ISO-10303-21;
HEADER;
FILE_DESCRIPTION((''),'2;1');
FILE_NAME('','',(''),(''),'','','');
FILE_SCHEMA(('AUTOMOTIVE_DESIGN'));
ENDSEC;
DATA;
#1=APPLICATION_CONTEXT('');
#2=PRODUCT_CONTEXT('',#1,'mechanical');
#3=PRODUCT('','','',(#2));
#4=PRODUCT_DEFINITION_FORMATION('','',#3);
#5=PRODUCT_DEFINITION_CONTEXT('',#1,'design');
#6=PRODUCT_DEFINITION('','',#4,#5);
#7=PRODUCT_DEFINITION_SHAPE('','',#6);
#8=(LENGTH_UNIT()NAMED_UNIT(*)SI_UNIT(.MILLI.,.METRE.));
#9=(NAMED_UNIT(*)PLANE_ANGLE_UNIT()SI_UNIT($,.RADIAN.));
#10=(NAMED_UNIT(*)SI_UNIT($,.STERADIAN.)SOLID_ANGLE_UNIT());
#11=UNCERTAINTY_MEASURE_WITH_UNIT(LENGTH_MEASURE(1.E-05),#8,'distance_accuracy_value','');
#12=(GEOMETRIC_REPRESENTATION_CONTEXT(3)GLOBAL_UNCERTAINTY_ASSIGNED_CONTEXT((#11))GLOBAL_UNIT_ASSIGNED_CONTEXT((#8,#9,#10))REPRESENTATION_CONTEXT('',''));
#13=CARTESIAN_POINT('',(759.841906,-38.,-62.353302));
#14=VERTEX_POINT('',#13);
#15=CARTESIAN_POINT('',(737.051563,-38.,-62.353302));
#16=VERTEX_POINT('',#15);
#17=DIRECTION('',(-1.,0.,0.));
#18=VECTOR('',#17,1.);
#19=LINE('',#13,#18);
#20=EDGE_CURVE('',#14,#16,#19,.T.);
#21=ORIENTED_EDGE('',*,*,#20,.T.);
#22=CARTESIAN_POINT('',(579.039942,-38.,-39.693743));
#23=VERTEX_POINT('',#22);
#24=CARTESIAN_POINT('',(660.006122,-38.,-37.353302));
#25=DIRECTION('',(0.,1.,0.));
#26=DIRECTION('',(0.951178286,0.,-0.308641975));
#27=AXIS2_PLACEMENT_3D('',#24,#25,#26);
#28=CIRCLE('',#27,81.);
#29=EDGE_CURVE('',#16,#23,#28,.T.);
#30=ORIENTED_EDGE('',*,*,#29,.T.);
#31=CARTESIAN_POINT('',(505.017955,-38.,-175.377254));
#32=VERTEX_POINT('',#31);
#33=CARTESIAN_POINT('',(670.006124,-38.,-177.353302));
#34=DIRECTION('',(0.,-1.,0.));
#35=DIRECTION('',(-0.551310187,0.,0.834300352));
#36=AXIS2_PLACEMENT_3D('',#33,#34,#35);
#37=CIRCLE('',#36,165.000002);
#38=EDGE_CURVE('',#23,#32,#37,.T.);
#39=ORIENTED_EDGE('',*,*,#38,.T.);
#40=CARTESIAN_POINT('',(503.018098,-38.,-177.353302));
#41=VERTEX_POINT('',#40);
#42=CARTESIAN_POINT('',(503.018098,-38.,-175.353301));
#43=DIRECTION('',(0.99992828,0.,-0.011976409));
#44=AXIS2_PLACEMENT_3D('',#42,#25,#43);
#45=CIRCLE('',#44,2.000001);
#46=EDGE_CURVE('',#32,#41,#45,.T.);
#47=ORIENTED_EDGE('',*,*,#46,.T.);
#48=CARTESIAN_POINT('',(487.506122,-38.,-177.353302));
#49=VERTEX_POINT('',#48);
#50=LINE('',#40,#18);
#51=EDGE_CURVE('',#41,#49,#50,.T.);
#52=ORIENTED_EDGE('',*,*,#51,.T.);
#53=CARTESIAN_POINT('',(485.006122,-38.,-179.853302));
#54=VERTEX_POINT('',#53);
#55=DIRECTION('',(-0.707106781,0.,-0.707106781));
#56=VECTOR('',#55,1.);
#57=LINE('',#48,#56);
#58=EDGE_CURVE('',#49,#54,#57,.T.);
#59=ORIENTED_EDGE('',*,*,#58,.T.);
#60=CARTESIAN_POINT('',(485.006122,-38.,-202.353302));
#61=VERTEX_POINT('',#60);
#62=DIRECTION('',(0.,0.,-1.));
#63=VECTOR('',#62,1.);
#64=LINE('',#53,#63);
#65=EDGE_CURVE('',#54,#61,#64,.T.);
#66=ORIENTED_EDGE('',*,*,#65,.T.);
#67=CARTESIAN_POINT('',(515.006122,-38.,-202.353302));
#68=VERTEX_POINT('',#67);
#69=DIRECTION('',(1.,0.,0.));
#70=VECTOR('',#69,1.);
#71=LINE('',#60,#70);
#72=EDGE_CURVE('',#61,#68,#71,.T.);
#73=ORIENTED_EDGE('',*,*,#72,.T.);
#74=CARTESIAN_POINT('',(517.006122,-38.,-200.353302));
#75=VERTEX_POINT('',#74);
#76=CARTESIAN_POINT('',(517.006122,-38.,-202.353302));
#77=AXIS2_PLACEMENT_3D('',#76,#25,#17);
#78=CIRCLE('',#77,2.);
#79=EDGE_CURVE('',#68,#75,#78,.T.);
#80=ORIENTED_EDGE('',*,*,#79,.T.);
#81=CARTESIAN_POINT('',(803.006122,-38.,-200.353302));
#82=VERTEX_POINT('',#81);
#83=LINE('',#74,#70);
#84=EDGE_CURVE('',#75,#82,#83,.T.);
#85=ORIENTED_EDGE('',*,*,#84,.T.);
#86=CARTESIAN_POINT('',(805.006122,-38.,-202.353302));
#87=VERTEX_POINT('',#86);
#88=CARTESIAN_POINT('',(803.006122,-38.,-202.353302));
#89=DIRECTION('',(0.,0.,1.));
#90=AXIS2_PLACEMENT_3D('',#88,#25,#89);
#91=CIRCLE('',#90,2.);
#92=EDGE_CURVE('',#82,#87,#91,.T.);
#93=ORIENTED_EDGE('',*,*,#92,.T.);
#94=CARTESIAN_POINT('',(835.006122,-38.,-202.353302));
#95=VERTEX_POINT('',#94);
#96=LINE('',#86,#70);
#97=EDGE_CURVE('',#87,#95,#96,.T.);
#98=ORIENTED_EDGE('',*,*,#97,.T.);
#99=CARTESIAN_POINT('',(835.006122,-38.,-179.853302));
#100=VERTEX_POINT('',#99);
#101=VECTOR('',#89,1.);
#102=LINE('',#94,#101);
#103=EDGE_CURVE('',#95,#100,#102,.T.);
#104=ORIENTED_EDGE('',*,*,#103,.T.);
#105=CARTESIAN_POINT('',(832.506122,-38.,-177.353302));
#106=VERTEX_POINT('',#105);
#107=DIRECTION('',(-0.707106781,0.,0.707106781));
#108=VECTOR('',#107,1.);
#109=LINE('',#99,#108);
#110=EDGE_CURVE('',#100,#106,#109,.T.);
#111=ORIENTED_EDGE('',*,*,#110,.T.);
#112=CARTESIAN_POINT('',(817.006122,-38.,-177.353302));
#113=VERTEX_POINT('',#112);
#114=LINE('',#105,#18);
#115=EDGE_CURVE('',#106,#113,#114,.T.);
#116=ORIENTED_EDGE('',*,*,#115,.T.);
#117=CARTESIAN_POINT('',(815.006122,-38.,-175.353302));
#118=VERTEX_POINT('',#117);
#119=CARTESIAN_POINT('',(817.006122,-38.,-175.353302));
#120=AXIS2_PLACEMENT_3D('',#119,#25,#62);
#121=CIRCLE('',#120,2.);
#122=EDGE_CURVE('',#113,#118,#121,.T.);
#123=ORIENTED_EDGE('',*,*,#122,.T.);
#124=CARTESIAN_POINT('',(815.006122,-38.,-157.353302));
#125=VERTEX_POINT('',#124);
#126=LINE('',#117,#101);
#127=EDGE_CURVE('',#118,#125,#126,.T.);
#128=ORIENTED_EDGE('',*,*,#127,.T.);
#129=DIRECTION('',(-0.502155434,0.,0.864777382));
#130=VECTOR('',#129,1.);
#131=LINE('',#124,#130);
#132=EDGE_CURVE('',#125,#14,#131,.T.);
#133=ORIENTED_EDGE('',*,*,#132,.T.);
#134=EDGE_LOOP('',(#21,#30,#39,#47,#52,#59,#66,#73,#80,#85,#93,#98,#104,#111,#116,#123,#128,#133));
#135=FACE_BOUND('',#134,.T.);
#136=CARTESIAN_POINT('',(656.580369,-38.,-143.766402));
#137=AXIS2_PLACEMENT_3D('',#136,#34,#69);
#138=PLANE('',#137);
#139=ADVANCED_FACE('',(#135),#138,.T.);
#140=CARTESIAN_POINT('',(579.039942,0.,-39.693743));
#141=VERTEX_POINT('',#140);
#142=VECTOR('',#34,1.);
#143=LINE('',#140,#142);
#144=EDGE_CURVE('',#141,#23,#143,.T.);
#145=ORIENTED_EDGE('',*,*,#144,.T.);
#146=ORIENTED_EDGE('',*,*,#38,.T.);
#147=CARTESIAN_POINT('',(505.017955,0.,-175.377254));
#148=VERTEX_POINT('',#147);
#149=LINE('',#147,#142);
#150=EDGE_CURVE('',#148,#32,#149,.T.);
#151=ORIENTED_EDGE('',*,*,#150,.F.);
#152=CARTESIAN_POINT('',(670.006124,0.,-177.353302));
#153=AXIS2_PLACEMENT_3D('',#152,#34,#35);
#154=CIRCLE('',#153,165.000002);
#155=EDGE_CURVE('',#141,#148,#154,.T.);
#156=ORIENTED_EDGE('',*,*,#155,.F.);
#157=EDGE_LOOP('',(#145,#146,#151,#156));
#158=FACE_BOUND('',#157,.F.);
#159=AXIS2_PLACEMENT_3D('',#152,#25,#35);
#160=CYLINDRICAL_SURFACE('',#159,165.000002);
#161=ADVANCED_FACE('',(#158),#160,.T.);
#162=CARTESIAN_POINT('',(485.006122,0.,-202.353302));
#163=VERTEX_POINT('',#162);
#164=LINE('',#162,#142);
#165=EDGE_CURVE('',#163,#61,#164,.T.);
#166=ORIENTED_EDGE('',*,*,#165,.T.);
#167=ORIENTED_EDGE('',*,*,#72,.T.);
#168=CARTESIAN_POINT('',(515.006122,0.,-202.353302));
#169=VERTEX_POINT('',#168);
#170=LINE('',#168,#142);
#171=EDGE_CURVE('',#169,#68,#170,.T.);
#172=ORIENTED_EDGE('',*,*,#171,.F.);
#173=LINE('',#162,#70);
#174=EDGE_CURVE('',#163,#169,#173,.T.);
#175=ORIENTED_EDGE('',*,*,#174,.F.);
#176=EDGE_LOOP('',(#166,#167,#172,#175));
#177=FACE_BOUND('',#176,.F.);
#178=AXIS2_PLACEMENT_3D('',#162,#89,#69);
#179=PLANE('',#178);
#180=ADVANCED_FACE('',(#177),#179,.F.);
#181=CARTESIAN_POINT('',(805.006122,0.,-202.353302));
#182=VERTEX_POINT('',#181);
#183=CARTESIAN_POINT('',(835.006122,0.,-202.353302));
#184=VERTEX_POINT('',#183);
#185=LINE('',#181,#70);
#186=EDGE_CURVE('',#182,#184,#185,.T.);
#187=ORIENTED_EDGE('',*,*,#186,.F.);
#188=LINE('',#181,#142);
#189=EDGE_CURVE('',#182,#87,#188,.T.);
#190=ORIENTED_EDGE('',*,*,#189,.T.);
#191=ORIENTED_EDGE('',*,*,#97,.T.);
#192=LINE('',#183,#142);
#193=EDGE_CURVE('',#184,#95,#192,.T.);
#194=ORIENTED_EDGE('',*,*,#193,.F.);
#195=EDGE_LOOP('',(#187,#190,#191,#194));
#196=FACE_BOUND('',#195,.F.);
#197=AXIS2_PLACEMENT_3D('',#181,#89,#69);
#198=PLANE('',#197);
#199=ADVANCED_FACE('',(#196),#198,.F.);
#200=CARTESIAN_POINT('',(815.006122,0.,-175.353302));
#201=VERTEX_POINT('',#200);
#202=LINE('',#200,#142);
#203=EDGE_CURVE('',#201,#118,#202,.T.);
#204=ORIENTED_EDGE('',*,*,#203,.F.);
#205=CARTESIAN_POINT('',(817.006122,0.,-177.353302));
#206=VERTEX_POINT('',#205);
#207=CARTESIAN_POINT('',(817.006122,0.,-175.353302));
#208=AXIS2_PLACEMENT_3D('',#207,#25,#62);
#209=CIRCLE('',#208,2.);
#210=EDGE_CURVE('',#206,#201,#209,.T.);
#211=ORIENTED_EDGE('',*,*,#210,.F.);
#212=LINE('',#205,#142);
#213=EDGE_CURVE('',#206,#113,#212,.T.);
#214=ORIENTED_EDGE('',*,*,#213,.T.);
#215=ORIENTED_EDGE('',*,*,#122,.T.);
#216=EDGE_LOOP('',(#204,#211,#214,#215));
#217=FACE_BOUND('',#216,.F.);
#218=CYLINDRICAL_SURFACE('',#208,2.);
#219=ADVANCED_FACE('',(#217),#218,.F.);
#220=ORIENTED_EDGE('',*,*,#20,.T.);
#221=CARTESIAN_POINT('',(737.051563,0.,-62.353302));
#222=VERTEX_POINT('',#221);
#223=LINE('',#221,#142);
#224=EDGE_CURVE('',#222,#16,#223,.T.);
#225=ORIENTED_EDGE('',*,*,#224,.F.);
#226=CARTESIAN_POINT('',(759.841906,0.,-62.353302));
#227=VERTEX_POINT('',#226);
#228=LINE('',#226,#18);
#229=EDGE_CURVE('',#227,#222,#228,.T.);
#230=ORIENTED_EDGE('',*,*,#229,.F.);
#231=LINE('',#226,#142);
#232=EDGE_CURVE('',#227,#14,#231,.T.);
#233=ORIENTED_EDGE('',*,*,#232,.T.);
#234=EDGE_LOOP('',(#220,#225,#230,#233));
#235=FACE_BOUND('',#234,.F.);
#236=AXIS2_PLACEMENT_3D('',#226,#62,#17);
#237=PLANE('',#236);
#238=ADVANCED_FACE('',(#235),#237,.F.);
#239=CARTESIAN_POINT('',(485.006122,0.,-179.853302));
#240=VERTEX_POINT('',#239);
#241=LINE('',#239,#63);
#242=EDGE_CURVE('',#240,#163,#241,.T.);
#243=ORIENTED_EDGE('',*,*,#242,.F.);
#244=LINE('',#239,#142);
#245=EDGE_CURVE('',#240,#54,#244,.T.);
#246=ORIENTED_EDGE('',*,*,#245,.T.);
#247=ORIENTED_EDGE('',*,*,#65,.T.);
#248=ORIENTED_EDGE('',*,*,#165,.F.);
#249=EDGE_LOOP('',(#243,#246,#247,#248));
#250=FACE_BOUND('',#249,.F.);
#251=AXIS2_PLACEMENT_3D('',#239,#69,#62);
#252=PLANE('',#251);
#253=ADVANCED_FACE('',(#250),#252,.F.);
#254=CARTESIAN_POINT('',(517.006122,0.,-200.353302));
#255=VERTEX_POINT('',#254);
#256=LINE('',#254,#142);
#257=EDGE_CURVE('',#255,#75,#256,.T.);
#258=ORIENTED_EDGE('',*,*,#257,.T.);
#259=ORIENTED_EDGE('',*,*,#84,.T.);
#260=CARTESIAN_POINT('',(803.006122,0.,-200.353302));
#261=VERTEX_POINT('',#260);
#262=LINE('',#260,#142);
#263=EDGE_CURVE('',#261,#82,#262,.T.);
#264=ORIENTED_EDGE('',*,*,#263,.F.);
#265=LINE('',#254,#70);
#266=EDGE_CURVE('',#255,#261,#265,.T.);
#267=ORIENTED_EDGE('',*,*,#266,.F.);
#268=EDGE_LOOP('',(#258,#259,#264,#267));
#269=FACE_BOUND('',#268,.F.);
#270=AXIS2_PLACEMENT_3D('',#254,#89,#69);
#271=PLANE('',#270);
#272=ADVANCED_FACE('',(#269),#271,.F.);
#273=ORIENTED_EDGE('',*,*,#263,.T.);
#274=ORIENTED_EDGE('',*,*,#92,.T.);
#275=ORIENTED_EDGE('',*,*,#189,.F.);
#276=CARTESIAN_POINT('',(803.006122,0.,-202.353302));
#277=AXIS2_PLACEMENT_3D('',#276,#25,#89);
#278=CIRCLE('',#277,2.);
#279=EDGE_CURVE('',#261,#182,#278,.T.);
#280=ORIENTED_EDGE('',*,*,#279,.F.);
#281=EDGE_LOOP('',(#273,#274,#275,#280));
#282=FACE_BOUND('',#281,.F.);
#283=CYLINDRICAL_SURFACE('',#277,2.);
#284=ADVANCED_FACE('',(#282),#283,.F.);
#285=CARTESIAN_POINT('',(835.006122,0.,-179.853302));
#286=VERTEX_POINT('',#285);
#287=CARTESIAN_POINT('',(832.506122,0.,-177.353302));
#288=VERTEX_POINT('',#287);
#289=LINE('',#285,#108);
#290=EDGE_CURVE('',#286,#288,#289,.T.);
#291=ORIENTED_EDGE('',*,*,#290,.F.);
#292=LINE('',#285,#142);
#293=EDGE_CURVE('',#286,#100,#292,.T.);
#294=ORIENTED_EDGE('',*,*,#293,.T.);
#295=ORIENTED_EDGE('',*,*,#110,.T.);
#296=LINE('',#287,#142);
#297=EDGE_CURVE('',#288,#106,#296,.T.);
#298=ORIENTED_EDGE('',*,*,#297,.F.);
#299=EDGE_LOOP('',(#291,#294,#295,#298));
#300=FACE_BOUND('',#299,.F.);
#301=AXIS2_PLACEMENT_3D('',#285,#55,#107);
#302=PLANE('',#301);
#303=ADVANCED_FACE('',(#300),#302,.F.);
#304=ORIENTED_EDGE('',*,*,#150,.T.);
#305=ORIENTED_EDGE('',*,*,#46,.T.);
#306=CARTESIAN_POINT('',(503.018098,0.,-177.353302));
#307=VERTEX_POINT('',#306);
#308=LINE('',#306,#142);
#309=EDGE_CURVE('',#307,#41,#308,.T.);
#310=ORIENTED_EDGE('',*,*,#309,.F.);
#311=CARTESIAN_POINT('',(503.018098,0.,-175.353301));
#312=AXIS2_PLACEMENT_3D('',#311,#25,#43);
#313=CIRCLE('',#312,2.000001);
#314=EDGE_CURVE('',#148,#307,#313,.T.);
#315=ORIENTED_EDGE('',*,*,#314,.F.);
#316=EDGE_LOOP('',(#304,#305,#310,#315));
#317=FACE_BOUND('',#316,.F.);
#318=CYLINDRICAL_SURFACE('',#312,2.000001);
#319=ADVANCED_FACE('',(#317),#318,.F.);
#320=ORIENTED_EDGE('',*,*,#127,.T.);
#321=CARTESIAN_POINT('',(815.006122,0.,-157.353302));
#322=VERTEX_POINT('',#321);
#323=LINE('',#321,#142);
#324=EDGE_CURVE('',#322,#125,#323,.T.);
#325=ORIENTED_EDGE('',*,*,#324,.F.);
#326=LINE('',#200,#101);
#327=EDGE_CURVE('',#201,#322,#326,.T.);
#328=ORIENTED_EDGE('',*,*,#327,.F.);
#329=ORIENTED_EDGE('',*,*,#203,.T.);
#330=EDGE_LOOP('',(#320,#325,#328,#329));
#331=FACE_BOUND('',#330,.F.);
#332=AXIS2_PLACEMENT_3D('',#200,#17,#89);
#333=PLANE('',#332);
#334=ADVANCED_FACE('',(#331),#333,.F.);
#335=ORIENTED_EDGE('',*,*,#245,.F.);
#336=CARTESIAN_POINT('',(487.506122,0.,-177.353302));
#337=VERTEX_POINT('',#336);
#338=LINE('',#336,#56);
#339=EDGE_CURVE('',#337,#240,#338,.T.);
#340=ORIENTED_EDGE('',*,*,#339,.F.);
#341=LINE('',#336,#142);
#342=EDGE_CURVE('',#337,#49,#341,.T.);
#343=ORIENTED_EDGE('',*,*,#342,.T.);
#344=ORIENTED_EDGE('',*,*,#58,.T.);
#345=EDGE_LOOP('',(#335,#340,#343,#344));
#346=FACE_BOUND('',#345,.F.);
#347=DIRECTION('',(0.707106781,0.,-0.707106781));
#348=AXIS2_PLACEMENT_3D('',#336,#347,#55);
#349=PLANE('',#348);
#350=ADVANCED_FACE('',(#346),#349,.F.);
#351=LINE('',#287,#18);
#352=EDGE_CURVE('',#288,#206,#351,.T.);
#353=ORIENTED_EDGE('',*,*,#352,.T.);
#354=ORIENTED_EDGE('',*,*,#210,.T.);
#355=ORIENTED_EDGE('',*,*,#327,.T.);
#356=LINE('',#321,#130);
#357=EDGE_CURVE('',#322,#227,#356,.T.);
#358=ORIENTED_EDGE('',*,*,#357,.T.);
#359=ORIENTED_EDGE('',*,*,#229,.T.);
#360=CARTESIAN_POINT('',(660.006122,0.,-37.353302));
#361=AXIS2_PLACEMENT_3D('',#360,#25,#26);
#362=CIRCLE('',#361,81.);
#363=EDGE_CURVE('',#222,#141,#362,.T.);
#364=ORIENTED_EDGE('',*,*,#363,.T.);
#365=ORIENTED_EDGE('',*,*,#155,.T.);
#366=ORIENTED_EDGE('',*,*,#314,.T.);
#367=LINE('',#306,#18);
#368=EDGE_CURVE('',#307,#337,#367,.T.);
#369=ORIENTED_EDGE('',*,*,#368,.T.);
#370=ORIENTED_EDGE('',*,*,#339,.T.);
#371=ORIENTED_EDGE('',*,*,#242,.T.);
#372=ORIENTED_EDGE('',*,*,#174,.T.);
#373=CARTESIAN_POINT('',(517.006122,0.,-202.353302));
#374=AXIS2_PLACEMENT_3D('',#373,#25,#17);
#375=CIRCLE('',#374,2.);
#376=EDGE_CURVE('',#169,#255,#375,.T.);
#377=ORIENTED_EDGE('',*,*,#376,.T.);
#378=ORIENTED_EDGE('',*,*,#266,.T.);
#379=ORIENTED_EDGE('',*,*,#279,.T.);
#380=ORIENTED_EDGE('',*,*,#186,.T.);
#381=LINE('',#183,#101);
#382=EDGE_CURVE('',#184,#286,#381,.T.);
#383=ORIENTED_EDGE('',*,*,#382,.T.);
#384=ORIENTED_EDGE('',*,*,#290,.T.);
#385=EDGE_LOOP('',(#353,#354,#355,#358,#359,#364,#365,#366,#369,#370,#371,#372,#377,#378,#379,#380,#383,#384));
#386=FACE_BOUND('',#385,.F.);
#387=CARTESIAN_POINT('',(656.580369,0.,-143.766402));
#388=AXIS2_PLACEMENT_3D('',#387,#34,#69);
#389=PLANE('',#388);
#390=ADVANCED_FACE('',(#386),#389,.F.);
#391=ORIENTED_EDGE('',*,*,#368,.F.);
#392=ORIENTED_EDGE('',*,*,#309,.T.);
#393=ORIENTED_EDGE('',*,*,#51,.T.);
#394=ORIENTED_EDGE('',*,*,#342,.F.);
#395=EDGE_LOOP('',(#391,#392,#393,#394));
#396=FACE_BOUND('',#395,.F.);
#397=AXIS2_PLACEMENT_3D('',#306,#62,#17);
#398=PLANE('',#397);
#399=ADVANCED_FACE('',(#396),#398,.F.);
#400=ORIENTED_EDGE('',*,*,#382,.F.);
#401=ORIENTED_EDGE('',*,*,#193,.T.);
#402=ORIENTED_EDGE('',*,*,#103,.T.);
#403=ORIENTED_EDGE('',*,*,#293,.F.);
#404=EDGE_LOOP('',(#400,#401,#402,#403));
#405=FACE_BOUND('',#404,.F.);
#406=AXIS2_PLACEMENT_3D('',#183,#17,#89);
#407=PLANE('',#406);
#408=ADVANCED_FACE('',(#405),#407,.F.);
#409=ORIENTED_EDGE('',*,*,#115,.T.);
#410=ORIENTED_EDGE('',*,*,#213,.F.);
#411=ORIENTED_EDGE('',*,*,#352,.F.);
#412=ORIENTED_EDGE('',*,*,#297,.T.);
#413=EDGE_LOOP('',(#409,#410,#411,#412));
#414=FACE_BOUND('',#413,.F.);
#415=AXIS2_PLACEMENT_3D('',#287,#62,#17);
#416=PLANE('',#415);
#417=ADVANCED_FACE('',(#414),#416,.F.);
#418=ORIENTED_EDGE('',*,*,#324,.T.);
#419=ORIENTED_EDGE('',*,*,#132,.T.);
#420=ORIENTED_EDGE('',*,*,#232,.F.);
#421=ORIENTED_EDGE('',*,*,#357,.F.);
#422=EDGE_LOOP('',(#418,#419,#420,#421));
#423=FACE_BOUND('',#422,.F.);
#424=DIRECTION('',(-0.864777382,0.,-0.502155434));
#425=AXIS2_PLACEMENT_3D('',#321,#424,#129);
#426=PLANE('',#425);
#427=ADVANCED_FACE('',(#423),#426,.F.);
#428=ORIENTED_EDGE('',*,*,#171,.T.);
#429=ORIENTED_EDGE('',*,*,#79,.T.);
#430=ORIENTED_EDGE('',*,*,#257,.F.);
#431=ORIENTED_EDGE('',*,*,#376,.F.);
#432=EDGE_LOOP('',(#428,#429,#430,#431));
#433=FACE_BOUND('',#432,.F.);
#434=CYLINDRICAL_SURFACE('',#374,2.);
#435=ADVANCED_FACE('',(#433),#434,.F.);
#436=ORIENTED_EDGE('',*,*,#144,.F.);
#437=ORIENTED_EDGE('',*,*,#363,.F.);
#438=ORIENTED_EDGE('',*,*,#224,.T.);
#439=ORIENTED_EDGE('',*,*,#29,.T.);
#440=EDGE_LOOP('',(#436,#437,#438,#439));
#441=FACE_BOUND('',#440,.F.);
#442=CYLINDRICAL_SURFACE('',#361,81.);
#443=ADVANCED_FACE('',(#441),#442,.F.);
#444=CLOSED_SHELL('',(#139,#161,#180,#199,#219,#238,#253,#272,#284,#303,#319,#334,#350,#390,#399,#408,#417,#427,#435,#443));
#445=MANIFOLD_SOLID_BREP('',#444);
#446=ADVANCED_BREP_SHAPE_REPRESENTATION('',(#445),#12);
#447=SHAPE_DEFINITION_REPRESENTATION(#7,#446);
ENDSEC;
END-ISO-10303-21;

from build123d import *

# Parameters (mm, degrees)
F1_DEPTH = 38


# Not quite as in the source:
# - ends of sketch curves that miss each other by under 0.0002 mm in the source are joined


with BuildPart() as f1:
    # F0 (on Front) → F1 (new body)
    with BuildSketch(Plane.XZ):
        with BuildLine():
            Line((485.006122, -179.853302), (485.006122, -202.353302))
            Line((485.006122, -202.353302), (515.006122, -202.353302))
            ThreePointArc((515.006122, -202.353302), (515.5919084376, -200.9390884376), (517.006122, -200.353302))
            Line((517.006122, -200.353302), (803.006122, -200.353302))
            ThreePointArc((803.006122, -200.353302), (804.4203355624, -200.9390884376), (805.006122, -202.353302))
            Line((805.006122, -202.353302), (835.006122, -202.353302))
            Line((835.006122, -202.353302), (835.006122, -179.853302))
            Line((835.006122, -179.853302), (832.506122, -177.353302))
            Line((832.506122, -177.353302), (817.006122, -177.353302))
            ThreePointArc((817.006122, -177.353302), (815.5919084376, -176.7675155624), (815.006122, -175.353302))
            Line((815.006122, -175.353302), (815.006122, -157.353302))
            Line((815.006122, -157.353302), (759.841906, -62.353302))
            Line((759.841906, -62.353302), (737.051563, -62.353302))
            ThreePointArc((737.051563, -62.353302), (648.507993777, -117.5330565978), (579.0399418017, -39.6937430057))
            ThreePointArc((579.0399418017, -39.6937430057), (525.1590968788, -98.3321699305), (505.0179550476, -175.3772540006))
            ThreePointArc((505.0179550476, -175.3772540006), (504.4238177463, -176.7759586679), (503.018098, -177.353302))
            Line((503.018098, -177.353302), (487.506122, -177.353302))
            Line((487.506122, -177.353302), (485.006122, -179.853302))
        make_face()
    extrude(amount=F1_DEPTH)


solid = f1.part
